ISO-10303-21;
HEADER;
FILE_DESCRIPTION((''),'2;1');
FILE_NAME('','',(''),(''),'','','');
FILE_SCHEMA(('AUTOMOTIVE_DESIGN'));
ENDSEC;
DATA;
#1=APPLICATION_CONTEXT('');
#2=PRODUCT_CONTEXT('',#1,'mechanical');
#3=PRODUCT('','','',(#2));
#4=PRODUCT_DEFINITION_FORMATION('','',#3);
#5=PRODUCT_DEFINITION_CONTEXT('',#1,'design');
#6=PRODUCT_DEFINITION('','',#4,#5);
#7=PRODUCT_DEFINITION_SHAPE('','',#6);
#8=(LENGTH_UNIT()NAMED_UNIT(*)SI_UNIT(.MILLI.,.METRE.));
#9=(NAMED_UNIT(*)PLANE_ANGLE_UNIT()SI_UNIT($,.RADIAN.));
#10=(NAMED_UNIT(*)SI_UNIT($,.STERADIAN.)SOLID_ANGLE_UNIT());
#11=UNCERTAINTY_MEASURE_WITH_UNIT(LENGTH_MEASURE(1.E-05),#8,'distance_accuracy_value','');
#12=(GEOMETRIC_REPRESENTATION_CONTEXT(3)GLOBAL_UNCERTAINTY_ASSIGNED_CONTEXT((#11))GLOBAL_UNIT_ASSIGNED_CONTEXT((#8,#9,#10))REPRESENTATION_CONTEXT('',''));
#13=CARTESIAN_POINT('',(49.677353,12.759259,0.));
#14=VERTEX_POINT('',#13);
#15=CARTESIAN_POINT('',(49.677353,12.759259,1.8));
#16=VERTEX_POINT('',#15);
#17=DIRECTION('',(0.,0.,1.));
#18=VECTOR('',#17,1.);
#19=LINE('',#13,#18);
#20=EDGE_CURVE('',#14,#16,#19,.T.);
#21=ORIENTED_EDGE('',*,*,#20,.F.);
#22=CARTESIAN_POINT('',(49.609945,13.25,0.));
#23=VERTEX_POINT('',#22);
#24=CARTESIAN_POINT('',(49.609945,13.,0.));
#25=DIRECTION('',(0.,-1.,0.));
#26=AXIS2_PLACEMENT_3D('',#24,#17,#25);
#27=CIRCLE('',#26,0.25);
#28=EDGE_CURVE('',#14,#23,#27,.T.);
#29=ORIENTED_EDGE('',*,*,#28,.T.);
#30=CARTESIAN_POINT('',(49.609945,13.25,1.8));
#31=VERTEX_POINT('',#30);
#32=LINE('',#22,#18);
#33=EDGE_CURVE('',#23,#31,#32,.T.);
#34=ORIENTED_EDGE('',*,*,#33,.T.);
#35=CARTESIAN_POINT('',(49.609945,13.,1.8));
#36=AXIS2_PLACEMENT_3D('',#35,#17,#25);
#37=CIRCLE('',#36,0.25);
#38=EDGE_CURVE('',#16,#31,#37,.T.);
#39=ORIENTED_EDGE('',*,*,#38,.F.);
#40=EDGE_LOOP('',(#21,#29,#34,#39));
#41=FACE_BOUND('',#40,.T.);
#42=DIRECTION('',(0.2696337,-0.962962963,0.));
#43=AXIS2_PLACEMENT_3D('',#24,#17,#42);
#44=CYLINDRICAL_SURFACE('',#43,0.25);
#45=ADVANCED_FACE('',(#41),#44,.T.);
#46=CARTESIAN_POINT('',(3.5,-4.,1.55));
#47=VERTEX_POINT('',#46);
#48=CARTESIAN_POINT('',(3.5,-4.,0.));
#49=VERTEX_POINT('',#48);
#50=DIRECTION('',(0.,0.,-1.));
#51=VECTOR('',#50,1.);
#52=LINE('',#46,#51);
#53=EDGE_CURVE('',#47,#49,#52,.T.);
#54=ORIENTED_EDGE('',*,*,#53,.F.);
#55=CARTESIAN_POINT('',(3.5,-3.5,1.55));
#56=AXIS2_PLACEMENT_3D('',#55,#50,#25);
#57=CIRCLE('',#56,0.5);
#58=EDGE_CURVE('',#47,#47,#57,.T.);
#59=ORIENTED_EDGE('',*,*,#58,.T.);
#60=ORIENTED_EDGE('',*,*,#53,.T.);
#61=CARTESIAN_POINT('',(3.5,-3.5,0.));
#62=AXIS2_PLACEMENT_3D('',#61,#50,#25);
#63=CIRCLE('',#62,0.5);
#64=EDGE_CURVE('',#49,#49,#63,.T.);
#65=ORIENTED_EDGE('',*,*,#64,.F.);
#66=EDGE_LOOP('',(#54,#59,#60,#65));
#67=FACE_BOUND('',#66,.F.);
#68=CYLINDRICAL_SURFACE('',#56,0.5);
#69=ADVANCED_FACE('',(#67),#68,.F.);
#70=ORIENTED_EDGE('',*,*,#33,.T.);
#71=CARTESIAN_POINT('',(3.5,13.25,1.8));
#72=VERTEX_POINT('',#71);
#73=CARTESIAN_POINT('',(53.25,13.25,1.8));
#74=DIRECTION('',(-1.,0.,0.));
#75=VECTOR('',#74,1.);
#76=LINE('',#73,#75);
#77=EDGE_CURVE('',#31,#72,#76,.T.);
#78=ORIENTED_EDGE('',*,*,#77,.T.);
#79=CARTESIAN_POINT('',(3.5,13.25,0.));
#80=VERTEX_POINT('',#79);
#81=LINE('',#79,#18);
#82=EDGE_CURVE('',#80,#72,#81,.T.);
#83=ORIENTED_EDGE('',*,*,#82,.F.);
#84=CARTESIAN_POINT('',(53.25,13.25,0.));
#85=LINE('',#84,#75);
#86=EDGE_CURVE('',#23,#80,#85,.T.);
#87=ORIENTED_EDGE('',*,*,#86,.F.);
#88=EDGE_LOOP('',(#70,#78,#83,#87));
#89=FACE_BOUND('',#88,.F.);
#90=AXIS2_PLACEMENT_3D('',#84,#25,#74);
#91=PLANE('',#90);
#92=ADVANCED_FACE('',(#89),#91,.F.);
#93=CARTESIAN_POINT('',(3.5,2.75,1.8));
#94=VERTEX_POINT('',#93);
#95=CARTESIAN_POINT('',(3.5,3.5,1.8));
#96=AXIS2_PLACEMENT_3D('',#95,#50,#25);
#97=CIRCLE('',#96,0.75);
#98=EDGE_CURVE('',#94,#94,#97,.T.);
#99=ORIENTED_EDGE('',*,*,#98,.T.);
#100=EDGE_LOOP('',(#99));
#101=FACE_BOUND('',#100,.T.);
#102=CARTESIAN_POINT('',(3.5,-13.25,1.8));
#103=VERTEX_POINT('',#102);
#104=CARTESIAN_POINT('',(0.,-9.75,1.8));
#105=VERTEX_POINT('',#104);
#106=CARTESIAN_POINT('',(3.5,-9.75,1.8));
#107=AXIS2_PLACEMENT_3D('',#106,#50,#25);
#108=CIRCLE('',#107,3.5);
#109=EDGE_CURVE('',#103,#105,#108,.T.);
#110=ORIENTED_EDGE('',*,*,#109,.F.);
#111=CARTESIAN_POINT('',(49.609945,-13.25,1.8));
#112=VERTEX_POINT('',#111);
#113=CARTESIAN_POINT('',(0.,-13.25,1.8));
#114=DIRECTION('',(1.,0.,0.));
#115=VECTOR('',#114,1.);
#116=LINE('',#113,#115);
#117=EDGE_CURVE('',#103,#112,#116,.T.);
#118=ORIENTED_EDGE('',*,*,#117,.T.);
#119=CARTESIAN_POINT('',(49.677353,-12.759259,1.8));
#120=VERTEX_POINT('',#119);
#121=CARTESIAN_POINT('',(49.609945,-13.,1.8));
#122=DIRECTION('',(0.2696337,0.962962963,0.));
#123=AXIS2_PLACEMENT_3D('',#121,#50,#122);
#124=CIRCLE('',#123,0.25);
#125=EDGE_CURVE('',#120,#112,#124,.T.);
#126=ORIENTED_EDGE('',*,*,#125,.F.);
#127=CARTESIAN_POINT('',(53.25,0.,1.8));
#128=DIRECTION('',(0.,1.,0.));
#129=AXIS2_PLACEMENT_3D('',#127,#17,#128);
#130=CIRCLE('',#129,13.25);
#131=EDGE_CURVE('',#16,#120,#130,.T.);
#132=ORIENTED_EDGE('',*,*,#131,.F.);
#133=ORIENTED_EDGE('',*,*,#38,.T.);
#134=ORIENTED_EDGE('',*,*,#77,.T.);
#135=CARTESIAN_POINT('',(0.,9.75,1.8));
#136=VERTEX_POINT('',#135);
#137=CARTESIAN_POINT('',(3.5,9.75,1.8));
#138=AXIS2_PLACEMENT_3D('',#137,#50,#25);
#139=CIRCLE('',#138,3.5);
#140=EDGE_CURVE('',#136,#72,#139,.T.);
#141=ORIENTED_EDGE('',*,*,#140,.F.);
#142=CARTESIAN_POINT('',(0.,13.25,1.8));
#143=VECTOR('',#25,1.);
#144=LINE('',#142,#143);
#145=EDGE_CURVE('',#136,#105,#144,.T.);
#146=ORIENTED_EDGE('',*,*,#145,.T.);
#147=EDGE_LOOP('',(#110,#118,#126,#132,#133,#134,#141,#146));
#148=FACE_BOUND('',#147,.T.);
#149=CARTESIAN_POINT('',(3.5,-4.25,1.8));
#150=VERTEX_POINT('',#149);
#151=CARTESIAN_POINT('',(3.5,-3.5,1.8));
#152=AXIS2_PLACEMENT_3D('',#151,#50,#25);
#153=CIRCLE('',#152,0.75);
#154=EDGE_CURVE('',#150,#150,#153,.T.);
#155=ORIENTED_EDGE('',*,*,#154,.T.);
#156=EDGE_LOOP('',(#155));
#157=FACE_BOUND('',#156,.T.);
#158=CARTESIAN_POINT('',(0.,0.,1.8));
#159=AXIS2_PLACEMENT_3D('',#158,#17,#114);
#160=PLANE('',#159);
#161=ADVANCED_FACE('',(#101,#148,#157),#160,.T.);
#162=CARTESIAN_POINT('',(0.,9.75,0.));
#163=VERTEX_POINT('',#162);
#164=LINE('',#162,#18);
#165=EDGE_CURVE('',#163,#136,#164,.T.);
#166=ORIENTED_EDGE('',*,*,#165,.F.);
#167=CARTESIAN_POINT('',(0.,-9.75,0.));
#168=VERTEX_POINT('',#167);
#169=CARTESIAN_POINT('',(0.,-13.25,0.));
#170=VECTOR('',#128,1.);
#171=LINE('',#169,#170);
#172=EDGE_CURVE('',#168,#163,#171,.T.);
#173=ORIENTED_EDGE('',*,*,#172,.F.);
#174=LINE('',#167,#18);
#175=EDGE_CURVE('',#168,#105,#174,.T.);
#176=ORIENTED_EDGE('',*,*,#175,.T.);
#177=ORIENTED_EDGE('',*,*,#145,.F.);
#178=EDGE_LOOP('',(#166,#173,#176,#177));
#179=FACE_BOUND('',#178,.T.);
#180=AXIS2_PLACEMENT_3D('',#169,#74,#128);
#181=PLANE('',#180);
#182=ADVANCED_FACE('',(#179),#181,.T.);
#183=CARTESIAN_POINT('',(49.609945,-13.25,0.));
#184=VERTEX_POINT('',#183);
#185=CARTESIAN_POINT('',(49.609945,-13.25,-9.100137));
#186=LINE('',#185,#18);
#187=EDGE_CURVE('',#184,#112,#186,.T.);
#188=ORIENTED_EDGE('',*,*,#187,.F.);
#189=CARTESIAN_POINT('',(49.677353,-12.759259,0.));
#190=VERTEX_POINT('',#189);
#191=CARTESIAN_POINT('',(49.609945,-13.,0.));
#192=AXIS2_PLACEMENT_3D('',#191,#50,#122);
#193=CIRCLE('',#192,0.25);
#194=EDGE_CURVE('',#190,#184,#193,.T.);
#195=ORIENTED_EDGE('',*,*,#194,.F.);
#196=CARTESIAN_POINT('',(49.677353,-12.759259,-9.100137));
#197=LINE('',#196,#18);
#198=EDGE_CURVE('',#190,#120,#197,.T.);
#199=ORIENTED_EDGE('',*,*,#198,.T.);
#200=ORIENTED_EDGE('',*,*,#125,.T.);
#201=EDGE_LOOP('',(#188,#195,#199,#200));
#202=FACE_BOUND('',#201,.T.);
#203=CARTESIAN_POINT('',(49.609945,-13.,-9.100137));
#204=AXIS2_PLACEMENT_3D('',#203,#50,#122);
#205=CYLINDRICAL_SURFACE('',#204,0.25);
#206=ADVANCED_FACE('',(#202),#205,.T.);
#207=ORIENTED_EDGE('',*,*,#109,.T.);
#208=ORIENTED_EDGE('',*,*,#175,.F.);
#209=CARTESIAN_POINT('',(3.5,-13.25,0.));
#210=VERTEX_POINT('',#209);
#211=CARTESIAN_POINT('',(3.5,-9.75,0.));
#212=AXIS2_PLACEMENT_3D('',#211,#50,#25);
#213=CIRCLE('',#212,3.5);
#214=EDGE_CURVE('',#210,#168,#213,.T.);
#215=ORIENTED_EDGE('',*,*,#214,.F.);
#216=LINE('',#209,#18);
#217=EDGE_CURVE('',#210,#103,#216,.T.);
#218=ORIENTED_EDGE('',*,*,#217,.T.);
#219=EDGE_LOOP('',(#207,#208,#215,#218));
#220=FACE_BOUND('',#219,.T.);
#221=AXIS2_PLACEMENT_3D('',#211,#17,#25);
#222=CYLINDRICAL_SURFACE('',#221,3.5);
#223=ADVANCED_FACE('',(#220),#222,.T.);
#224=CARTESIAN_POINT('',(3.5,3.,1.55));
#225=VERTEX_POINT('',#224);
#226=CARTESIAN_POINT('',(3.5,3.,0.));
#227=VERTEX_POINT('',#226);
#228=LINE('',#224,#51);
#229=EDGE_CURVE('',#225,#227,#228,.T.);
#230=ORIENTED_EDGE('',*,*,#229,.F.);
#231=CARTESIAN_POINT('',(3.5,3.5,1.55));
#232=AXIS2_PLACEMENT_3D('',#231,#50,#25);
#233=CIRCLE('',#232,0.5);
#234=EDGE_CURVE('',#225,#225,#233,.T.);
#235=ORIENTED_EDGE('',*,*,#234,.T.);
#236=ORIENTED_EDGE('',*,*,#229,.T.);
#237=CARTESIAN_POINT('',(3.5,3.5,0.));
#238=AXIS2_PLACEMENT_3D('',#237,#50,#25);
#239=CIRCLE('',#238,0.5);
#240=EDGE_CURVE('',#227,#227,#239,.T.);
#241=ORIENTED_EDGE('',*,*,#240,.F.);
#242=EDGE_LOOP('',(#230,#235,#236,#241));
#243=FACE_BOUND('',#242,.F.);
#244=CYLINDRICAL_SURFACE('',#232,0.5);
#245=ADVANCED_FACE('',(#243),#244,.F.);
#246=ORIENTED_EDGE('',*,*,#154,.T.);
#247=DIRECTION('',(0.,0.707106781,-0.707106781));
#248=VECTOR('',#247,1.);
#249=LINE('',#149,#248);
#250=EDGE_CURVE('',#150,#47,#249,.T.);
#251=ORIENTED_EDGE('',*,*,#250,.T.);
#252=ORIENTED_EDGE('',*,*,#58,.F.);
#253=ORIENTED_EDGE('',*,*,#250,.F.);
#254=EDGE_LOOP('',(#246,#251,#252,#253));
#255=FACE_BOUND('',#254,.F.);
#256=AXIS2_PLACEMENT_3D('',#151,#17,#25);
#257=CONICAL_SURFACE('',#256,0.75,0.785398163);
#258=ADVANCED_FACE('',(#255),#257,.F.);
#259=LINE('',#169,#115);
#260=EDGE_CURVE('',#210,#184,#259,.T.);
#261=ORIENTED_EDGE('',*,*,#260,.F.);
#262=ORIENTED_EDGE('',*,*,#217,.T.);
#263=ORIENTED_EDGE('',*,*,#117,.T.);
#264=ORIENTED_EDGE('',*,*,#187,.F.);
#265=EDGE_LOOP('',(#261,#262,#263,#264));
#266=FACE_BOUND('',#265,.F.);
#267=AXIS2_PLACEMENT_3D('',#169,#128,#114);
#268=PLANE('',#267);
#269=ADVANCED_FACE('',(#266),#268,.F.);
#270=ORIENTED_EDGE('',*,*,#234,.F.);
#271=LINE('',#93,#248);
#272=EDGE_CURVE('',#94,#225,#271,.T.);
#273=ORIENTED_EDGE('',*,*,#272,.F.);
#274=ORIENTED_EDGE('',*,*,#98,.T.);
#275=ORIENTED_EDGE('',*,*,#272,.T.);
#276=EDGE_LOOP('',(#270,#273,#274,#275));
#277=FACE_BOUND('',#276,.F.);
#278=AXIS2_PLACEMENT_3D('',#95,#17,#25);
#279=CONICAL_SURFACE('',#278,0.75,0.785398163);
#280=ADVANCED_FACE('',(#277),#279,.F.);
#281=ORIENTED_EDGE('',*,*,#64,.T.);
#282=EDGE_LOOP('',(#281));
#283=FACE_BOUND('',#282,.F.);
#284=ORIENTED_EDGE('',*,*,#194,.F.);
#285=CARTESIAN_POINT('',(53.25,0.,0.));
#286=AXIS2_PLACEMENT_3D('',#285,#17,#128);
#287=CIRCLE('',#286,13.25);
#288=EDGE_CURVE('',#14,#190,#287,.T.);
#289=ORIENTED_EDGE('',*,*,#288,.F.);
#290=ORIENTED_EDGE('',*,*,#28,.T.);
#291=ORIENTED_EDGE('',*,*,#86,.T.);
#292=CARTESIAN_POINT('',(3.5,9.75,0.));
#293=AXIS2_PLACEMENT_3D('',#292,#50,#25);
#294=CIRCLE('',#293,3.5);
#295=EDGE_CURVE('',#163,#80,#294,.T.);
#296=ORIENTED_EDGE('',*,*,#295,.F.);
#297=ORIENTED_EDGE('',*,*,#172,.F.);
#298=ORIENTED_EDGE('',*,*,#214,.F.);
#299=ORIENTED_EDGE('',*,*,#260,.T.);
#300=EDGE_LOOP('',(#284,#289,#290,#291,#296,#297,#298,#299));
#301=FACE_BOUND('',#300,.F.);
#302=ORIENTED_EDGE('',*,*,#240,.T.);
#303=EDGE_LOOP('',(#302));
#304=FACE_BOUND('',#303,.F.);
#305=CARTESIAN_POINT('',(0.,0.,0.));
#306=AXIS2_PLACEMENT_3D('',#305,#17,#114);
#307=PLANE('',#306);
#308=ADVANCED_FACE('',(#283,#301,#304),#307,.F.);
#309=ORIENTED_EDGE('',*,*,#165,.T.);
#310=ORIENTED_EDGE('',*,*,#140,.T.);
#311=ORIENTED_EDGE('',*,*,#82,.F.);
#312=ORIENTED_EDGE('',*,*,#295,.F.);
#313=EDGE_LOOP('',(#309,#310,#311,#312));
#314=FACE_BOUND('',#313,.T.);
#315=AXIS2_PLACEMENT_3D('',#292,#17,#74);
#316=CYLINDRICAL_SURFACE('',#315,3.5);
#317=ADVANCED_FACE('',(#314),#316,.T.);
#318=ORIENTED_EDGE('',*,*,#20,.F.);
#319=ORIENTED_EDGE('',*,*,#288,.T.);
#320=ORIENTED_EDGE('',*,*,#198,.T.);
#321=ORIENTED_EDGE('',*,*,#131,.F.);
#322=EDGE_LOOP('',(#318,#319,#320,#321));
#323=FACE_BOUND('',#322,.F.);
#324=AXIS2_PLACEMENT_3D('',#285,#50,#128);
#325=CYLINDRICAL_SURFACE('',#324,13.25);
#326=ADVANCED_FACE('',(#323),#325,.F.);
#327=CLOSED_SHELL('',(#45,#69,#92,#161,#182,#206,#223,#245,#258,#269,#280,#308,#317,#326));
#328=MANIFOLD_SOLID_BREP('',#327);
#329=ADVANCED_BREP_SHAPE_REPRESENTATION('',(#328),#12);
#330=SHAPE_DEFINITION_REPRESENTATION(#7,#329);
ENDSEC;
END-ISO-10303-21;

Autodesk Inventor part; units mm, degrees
ref_plane "YZ Plane" through (0, 0, 0) normal (1, 0, 0) x (0, 1, 0)
ref_plane "XZ Plane" through (0, 0, 0) normal (0, 1, 0) x (-1, 0, 0)
ref_plane "XY Plane" through (0, 0, 0) normal (0, 0, 1) x (1, 0, 0)
sketch "Эскиз1" plane through (0, 0, 0) normal (0, 0, 1) x (1, 0, 0)
  line L0 (53.25, 13.25) -> (0, 13.25)
  line L1 (0, -13.25) -> (53.25, -13.25)
  arc A0 (53.25, 13.25) -> (53.25, -13.25) centre (53.25, 0) ccw
  line L2 (0, -13.25) -> (0, 13.25)
  line L3 (0, 0) -> (40, 0) construction
  line L4 (0, 0) -> (0, 13.25) construction
  line L5 (0, 13.25) -> (0, 11.25)
  point P0 (20, 0)
  dimension "d0" = 13.25
  dimension "d47" = 40
extrude "Выдавливание3" add sketch "Эскиз1" along normal blind 1.8
fillet "Сопряжение3" radius 0.25 2 edges at (53.25, 13.25, 0.9) (53.25, -13.25, 0.9)
fillet "Сопряжение4" radius 3.5 2 edges at (0, -13.25, 0.9) (0, 13.25, 0.9)
sketch "Эскиз6" plane through (0, 0, 1.8) normal (0, 0, 1) x (1, 0, 0)
  arc A0 (49.6774, 12.7593) -> (49.6774, -12.7593) centre (53.25, 0) ccw construction
  line L0 (40, 0) -> (0, 0) construction
  line L1 (0, -13.25) -> (0, 13.25) construction
  circle A1 centre (3.5, 3.5) radius 0.5
  line L2 (3.5, 3.5) -> (0, 3.5) construction
  line L3 (3.5, 3.5) -> (3.5, 0) construction
  circle A2 centre (3.5, -3.5) radius 0.5
  point P0 (49.6099, -13.25)
  dimension "d58" = 1
  dimension "d59" = 3.5
hole "Отверстие1" at (3.5, -3.5, 1.8) at (3.5, 3.5, 1.8) direction (0, 0, -1) diameter 1 end through all countersink diameter 1.5 countersink angle 90
properties part number "Поршень"
